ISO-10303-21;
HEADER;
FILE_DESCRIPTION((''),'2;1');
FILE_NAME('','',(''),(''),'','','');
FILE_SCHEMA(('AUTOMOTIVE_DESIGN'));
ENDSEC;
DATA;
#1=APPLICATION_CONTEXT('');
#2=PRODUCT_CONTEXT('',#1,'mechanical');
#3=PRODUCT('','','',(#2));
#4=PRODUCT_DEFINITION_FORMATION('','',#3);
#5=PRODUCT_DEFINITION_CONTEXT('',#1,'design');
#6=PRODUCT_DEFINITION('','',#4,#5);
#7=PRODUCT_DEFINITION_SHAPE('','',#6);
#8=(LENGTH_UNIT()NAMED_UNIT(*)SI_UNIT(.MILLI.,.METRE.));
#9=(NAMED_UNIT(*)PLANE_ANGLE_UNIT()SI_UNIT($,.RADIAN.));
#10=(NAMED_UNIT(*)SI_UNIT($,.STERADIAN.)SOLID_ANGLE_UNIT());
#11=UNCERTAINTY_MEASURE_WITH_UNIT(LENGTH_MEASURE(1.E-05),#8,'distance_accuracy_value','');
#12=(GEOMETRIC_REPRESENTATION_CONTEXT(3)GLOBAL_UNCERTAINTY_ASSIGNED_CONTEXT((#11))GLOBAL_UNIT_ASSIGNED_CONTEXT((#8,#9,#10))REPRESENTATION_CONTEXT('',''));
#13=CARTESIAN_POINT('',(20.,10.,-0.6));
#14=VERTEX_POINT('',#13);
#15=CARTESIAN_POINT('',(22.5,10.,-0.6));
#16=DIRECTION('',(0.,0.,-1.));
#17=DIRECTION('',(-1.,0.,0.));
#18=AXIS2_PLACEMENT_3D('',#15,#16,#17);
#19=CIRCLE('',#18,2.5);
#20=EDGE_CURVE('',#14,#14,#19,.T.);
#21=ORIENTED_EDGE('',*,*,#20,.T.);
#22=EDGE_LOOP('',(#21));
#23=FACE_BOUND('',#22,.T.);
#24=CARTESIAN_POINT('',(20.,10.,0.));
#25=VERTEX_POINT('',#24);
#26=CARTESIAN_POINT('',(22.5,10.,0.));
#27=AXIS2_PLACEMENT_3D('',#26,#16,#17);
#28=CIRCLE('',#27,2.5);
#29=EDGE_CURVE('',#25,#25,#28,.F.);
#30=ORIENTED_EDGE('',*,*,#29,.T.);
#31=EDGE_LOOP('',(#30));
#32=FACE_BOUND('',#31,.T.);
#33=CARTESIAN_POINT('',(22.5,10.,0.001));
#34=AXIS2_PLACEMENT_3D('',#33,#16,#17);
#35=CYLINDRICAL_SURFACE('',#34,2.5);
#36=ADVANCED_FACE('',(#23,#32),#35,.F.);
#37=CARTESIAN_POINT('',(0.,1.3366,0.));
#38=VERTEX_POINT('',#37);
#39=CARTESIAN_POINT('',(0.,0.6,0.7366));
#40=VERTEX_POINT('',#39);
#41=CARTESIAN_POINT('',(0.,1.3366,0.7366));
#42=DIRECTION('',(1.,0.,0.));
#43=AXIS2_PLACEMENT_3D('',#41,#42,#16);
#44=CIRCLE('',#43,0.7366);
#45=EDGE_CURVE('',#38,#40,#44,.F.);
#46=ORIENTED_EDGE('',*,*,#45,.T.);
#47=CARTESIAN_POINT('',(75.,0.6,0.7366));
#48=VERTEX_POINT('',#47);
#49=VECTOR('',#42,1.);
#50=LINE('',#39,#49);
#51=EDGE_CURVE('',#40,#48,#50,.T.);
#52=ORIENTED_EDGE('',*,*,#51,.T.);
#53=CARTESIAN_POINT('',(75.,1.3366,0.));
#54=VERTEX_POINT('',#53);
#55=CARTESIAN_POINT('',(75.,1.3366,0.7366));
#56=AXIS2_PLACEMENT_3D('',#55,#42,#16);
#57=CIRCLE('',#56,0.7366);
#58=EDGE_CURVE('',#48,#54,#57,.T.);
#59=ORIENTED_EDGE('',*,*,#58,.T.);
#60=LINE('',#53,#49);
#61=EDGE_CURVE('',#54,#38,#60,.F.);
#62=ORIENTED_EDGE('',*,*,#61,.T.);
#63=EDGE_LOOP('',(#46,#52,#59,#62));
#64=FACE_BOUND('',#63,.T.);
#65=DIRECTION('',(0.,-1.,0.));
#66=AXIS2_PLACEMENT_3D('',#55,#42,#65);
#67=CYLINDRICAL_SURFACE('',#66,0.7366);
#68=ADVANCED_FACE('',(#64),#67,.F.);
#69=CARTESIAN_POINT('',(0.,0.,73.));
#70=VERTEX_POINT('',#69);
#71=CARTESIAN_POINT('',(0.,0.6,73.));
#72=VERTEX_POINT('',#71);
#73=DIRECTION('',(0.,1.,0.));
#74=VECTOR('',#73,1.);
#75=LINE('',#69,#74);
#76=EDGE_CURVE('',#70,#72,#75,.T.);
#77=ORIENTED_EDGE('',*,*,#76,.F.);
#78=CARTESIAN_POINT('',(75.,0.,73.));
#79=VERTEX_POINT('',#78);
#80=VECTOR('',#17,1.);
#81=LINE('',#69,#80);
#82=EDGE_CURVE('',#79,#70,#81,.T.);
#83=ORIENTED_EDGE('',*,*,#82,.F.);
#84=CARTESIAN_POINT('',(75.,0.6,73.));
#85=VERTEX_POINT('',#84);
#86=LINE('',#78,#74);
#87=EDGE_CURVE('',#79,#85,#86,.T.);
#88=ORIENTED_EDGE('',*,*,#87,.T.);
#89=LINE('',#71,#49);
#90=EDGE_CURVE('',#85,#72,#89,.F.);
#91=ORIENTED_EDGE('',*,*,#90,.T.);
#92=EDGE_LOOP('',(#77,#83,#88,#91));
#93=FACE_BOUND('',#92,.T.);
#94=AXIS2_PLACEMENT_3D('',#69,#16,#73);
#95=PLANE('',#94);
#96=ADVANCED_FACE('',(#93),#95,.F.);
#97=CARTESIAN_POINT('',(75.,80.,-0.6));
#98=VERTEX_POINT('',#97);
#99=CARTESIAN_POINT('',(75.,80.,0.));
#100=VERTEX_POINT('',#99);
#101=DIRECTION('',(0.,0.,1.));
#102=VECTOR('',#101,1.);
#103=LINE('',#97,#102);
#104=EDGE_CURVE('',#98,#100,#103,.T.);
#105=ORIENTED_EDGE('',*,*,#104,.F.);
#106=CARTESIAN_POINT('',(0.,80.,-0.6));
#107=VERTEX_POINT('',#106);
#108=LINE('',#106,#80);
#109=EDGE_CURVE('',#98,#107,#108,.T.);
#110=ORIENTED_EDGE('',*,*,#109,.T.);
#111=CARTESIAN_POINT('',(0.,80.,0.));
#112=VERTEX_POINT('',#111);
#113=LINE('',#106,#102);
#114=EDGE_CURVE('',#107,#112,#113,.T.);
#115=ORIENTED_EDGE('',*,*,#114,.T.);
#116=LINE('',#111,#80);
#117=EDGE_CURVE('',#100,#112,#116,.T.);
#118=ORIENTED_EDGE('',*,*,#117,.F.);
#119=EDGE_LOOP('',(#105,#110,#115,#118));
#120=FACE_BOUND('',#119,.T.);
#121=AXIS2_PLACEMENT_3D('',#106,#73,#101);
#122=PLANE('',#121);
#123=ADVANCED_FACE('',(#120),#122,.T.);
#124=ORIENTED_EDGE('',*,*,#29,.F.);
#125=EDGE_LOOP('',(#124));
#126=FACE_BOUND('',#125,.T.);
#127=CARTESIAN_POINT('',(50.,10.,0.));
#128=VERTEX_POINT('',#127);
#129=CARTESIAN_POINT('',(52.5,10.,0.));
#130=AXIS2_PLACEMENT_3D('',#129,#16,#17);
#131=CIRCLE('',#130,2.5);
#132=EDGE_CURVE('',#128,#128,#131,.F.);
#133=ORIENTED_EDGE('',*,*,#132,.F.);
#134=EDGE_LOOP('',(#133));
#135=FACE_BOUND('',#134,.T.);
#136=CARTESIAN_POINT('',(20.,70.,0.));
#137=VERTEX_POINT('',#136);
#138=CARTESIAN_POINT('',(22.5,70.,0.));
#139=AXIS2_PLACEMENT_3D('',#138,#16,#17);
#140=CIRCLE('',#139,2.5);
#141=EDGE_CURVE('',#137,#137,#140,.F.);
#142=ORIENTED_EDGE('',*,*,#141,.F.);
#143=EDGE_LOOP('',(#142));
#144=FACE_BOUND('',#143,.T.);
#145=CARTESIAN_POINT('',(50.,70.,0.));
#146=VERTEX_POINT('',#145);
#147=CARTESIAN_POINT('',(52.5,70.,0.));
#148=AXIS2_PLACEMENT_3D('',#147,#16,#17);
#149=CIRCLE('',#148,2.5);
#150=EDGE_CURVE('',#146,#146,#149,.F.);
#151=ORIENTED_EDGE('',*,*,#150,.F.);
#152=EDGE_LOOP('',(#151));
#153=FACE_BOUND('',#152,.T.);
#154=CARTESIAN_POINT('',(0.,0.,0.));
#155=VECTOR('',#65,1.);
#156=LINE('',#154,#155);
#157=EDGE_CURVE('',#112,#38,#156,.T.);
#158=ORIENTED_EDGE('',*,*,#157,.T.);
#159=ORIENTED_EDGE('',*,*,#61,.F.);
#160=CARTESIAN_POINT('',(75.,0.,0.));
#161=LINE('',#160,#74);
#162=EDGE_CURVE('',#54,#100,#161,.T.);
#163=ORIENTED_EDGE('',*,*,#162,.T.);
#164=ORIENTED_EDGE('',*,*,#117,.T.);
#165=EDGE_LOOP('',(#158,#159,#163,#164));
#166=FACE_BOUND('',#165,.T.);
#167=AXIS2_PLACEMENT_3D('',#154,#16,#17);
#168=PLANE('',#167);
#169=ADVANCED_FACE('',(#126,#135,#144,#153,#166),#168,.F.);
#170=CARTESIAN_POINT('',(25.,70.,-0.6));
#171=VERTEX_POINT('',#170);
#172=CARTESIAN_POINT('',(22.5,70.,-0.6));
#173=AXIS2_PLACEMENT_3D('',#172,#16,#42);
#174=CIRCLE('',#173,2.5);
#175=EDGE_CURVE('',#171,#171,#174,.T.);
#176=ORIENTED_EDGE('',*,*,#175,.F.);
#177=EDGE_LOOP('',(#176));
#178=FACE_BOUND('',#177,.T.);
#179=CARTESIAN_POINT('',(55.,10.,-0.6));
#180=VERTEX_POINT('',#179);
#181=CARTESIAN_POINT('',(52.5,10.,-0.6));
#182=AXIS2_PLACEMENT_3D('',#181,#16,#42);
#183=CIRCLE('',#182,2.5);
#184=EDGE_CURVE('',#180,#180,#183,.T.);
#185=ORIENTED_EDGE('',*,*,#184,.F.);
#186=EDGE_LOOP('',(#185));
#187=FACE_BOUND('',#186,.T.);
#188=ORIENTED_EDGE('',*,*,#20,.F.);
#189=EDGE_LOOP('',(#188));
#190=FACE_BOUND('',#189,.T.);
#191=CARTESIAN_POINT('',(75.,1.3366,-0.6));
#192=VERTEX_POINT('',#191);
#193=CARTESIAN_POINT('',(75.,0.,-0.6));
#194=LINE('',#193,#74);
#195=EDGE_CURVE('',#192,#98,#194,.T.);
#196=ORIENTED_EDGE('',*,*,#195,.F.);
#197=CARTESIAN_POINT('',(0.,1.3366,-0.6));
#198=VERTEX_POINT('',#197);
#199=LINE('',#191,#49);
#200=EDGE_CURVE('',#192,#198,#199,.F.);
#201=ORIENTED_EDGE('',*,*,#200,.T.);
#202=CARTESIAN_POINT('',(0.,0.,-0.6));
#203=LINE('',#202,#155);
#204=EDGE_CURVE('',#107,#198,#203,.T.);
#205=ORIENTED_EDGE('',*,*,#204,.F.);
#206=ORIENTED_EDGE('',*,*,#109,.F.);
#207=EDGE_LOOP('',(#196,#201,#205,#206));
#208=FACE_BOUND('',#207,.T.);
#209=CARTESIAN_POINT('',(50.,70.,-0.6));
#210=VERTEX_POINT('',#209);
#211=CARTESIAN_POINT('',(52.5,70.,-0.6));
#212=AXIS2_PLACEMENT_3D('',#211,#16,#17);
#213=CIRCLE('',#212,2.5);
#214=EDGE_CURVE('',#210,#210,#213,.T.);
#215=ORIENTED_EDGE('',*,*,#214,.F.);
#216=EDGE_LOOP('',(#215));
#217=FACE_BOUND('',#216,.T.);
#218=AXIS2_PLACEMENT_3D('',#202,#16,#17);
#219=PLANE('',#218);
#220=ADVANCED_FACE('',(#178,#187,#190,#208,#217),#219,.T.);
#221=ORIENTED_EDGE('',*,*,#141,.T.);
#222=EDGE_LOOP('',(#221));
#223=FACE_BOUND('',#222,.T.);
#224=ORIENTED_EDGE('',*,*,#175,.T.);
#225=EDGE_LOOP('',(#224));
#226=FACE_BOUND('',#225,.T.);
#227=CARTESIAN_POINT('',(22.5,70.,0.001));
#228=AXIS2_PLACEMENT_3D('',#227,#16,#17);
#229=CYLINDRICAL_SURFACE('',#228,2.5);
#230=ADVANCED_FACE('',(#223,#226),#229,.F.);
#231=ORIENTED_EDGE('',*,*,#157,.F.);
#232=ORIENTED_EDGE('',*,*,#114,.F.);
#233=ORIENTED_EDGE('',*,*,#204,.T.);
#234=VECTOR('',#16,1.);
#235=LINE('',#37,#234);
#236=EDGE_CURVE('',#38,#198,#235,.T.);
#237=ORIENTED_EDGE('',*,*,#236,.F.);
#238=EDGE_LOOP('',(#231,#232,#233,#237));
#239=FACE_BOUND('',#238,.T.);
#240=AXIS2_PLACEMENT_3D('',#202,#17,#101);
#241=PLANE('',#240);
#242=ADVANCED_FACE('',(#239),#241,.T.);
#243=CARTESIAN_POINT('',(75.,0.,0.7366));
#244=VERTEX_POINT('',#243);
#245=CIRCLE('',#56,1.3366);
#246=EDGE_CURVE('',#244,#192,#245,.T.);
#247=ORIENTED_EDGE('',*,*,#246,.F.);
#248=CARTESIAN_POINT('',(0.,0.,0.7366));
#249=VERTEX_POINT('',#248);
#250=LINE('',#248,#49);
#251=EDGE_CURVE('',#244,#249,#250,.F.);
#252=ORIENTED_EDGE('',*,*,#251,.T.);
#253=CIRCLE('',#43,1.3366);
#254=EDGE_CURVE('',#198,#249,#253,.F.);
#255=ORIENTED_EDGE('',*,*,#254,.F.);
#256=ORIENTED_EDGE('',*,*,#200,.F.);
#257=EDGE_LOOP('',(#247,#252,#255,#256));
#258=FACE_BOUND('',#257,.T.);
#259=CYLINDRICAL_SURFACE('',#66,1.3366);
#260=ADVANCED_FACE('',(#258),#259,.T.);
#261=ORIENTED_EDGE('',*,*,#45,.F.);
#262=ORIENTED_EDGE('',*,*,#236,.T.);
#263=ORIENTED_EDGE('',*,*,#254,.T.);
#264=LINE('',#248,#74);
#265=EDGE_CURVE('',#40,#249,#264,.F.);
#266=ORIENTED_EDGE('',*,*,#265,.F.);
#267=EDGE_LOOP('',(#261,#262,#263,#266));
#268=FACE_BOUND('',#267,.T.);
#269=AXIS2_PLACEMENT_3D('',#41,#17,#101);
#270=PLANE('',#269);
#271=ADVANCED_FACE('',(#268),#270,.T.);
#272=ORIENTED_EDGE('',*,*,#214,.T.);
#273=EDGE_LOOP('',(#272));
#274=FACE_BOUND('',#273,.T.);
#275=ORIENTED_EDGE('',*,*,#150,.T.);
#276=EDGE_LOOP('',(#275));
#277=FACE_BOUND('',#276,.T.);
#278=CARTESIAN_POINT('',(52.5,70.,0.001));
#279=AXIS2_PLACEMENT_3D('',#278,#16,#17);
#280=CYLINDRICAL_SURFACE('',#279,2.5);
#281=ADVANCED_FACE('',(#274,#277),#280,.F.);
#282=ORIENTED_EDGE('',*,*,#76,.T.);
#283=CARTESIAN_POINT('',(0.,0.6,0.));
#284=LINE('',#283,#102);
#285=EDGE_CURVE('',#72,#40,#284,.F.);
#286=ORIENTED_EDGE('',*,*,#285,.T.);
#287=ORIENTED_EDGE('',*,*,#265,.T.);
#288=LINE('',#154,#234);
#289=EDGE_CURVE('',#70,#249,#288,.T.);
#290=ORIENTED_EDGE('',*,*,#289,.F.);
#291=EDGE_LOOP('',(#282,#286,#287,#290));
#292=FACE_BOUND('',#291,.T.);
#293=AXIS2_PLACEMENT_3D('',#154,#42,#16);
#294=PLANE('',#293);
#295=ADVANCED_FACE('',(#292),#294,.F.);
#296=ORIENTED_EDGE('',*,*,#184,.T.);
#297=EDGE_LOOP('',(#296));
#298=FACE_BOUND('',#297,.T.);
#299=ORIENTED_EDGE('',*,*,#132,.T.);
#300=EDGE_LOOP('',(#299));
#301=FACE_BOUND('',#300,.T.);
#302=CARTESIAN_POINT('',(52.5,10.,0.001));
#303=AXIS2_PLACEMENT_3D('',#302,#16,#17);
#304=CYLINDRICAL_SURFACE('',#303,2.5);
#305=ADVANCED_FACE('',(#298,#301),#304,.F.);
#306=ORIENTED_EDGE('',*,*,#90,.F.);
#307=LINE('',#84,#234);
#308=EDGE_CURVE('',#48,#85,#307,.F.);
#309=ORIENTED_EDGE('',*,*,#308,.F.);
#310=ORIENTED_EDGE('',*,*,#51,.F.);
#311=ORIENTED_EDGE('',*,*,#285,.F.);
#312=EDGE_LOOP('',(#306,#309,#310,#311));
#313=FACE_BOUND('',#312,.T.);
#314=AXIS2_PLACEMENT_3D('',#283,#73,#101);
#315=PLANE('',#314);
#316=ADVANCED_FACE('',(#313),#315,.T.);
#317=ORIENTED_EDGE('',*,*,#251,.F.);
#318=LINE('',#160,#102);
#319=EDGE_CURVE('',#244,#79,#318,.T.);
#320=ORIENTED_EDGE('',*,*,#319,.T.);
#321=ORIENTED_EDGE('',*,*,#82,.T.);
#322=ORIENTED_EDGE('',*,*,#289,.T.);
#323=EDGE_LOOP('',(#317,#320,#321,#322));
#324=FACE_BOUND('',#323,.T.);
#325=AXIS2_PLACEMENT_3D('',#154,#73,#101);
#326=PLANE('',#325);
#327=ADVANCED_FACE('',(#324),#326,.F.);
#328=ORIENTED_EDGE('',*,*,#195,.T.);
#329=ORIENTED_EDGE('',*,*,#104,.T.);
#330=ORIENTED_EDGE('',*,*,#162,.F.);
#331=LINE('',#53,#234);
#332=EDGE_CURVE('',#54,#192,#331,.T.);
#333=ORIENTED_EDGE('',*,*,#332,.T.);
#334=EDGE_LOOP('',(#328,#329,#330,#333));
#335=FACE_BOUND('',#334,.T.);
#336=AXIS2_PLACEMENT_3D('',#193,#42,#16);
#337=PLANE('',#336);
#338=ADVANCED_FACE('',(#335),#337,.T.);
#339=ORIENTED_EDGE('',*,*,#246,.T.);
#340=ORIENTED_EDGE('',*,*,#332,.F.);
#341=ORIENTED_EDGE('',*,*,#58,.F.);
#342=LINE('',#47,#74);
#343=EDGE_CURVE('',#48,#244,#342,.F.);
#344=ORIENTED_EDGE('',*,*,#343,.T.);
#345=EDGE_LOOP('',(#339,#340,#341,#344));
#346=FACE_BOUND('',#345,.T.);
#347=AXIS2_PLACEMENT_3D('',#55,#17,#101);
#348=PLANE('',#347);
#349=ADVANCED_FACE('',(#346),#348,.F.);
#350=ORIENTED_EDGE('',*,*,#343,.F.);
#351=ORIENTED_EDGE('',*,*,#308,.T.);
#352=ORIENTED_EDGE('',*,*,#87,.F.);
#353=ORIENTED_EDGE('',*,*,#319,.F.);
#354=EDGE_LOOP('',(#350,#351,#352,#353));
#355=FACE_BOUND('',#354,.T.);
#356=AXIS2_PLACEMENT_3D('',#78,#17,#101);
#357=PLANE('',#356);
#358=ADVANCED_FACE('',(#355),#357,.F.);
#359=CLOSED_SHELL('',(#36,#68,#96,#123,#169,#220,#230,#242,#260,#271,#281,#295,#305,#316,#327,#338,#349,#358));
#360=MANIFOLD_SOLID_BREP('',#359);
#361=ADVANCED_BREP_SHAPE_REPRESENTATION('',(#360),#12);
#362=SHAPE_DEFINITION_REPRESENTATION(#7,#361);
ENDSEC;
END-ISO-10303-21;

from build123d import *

# Parameters (mm, degrees)
SKETCH2_W                    = 75
SKETCH2_H                    = 80
BASE_FLANGE1_DEPTH           = 0.6
CUT_EXTRUDE1_REACH           = 111.66
SKETCH10_R                   = 2.5
EDGE_FLANGE1_STRIP_W         = 3.8732
EDGE_FLANGE1_STRIP_H         = 0.6
EDGE_FLANGE1_STRIP_CUT_DEPTH = 75
EDGE_FLANGE1_DEPTH           = 75


# Sheet-metal steps are written as plain solids
with BuildPart() as part:
    # Sketch2 → Base-Flange1 (new body)
    with BuildSketch(Plane.XY):
        with Locations((37.5, 40)):
            Rectangle(SKETCH2_W, SKETCH2_H)
    extrude(amount=-BASE_FLANGE1_DEPTH)

    # Sketch10 → Cut-Extrude1 (cut, up to next)
    with BuildSketch(Plane(origin=(0, 0, -0.6), x_dir=(-1, 0, 0), z_dir=(0, 0, -1)), mode=Mode.PRIVATE) as cut_extrude1_sk1:
        with Locations((-22.5, 10)):
            Circle(SKETCH10_R)
    cut_extrude1_tool1 = extrude(cut_extrude1_sk1.sketch, amount=-CUT_EXTRUDE1_REACH, mode=Mode.PRIVATE) & part.part
    # Sketch10 → Cut-Extrude1 (cut, up to next)
    with BuildSketch(Plane(origin=(0, 0, -0.6), x_dir=(-1, 0, 0), z_dir=(0, 0, -1)), mode=Mode.PRIVATE) as cut_extrude1_sk2:
        with Locations((-52.5, 70)):
            Circle(SKETCH10_R)
    cut_extrude1_tool2 = extrude(cut_extrude1_sk2.sketch, amount=-CUT_EXTRUDE1_REACH, mode=Mode.PRIVATE) & part.part
    # Sketch10 → Cut-Extrude1 (cut, up to next)
    with BuildSketch(Plane(origin=(0, 0, -0.6), x_dir=(-1, 0, 0), z_dir=(0, 0, -1)), mode=Mode.PRIVATE) as cut_extrude1_sk3:
        with Locations((-52.5, 10)):
            Circle(SKETCH10_R)
    cut_extrude1_tool3 = extrude(cut_extrude1_sk3.sketch, amount=-CUT_EXTRUDE1_REACH, mode=Mode.PRIVATE) & part.part
    # Sketch10 → Cut-Extrude1 (cut, up to next)
    with BuildSketch(Plane(origin=(0, 0, -0.6), x_dir=(-1, 0, 0), z_dir=(0, 0, -1)), mode=Mode.PRIVATE) as cut_extrude1_sk4:
        with Locations((-22.5, 70)):
            Circle(SKETCH10_R)
    cut_extrude1_tool4 = extrude(cut_extrude1_sk4.sketch, amount=-CUT_EXTRUDE1_REACH, mode=Mode.PRIVATE) & part.part
    add(cut_extrude1_tool1.solids().sort_by_distance((22.5, 10, -0.6))[0], mode=Mode.SUBTRACT)
    add(cut_extrude1_tool2.solids().sort_by_distance((52.5, 70, -0.6))[0], mode=Mode.SUBTRACT)
    add(cut_extrude1_tool3.solids().sort_by_distance((52.5, 10, -0.6))[0], mode=Mode.SUBTRACT)
    add(cut_extrude1_tool4.solids().sort_by_distance((22.5, 70, -0.6))[0], mode=Mode.SUBTRACT)

    # Edge-Flange1 strip (across the edge) → Edge-Flange1 strip cut (cut)
    with BuildSketch(Plane.YZ):
        with Locations((-0.6, -0.3)):
            Rectangle(EDGE_FLANGE1_STRIP_W, EDGE_FLANGE1_STRIP_H)
    extrude(amount=EDGE_FLANGE1_STRIP_CUT_DEPTH, mode=Mode.SUBTRACT)

    # Edge-Flange1 section (across the edge) → Edge-Flange1 (add)
    with BuildSketch(Plane.YZ):
        with BuildLine():
            Line((0, 0.7366), (0, 73))
            Line((0, 73), (0.6, 73))
            Line((0.6, 73), (0.6, 0.7366))
            ThreePointArc((0.6, 0.7366), (0.815745145, 0.215745145), (1.3366, 0))
            Line((1.3366, 0), (1.3366, -0.6))
            ThreePointArc((1.3366, -0.6), (0.391481076, -0.208518924), (0, 0.7366))
        make_face()
    extrude(amount=EDGE_FLANGE1_DEPTH)


solid = part.part
